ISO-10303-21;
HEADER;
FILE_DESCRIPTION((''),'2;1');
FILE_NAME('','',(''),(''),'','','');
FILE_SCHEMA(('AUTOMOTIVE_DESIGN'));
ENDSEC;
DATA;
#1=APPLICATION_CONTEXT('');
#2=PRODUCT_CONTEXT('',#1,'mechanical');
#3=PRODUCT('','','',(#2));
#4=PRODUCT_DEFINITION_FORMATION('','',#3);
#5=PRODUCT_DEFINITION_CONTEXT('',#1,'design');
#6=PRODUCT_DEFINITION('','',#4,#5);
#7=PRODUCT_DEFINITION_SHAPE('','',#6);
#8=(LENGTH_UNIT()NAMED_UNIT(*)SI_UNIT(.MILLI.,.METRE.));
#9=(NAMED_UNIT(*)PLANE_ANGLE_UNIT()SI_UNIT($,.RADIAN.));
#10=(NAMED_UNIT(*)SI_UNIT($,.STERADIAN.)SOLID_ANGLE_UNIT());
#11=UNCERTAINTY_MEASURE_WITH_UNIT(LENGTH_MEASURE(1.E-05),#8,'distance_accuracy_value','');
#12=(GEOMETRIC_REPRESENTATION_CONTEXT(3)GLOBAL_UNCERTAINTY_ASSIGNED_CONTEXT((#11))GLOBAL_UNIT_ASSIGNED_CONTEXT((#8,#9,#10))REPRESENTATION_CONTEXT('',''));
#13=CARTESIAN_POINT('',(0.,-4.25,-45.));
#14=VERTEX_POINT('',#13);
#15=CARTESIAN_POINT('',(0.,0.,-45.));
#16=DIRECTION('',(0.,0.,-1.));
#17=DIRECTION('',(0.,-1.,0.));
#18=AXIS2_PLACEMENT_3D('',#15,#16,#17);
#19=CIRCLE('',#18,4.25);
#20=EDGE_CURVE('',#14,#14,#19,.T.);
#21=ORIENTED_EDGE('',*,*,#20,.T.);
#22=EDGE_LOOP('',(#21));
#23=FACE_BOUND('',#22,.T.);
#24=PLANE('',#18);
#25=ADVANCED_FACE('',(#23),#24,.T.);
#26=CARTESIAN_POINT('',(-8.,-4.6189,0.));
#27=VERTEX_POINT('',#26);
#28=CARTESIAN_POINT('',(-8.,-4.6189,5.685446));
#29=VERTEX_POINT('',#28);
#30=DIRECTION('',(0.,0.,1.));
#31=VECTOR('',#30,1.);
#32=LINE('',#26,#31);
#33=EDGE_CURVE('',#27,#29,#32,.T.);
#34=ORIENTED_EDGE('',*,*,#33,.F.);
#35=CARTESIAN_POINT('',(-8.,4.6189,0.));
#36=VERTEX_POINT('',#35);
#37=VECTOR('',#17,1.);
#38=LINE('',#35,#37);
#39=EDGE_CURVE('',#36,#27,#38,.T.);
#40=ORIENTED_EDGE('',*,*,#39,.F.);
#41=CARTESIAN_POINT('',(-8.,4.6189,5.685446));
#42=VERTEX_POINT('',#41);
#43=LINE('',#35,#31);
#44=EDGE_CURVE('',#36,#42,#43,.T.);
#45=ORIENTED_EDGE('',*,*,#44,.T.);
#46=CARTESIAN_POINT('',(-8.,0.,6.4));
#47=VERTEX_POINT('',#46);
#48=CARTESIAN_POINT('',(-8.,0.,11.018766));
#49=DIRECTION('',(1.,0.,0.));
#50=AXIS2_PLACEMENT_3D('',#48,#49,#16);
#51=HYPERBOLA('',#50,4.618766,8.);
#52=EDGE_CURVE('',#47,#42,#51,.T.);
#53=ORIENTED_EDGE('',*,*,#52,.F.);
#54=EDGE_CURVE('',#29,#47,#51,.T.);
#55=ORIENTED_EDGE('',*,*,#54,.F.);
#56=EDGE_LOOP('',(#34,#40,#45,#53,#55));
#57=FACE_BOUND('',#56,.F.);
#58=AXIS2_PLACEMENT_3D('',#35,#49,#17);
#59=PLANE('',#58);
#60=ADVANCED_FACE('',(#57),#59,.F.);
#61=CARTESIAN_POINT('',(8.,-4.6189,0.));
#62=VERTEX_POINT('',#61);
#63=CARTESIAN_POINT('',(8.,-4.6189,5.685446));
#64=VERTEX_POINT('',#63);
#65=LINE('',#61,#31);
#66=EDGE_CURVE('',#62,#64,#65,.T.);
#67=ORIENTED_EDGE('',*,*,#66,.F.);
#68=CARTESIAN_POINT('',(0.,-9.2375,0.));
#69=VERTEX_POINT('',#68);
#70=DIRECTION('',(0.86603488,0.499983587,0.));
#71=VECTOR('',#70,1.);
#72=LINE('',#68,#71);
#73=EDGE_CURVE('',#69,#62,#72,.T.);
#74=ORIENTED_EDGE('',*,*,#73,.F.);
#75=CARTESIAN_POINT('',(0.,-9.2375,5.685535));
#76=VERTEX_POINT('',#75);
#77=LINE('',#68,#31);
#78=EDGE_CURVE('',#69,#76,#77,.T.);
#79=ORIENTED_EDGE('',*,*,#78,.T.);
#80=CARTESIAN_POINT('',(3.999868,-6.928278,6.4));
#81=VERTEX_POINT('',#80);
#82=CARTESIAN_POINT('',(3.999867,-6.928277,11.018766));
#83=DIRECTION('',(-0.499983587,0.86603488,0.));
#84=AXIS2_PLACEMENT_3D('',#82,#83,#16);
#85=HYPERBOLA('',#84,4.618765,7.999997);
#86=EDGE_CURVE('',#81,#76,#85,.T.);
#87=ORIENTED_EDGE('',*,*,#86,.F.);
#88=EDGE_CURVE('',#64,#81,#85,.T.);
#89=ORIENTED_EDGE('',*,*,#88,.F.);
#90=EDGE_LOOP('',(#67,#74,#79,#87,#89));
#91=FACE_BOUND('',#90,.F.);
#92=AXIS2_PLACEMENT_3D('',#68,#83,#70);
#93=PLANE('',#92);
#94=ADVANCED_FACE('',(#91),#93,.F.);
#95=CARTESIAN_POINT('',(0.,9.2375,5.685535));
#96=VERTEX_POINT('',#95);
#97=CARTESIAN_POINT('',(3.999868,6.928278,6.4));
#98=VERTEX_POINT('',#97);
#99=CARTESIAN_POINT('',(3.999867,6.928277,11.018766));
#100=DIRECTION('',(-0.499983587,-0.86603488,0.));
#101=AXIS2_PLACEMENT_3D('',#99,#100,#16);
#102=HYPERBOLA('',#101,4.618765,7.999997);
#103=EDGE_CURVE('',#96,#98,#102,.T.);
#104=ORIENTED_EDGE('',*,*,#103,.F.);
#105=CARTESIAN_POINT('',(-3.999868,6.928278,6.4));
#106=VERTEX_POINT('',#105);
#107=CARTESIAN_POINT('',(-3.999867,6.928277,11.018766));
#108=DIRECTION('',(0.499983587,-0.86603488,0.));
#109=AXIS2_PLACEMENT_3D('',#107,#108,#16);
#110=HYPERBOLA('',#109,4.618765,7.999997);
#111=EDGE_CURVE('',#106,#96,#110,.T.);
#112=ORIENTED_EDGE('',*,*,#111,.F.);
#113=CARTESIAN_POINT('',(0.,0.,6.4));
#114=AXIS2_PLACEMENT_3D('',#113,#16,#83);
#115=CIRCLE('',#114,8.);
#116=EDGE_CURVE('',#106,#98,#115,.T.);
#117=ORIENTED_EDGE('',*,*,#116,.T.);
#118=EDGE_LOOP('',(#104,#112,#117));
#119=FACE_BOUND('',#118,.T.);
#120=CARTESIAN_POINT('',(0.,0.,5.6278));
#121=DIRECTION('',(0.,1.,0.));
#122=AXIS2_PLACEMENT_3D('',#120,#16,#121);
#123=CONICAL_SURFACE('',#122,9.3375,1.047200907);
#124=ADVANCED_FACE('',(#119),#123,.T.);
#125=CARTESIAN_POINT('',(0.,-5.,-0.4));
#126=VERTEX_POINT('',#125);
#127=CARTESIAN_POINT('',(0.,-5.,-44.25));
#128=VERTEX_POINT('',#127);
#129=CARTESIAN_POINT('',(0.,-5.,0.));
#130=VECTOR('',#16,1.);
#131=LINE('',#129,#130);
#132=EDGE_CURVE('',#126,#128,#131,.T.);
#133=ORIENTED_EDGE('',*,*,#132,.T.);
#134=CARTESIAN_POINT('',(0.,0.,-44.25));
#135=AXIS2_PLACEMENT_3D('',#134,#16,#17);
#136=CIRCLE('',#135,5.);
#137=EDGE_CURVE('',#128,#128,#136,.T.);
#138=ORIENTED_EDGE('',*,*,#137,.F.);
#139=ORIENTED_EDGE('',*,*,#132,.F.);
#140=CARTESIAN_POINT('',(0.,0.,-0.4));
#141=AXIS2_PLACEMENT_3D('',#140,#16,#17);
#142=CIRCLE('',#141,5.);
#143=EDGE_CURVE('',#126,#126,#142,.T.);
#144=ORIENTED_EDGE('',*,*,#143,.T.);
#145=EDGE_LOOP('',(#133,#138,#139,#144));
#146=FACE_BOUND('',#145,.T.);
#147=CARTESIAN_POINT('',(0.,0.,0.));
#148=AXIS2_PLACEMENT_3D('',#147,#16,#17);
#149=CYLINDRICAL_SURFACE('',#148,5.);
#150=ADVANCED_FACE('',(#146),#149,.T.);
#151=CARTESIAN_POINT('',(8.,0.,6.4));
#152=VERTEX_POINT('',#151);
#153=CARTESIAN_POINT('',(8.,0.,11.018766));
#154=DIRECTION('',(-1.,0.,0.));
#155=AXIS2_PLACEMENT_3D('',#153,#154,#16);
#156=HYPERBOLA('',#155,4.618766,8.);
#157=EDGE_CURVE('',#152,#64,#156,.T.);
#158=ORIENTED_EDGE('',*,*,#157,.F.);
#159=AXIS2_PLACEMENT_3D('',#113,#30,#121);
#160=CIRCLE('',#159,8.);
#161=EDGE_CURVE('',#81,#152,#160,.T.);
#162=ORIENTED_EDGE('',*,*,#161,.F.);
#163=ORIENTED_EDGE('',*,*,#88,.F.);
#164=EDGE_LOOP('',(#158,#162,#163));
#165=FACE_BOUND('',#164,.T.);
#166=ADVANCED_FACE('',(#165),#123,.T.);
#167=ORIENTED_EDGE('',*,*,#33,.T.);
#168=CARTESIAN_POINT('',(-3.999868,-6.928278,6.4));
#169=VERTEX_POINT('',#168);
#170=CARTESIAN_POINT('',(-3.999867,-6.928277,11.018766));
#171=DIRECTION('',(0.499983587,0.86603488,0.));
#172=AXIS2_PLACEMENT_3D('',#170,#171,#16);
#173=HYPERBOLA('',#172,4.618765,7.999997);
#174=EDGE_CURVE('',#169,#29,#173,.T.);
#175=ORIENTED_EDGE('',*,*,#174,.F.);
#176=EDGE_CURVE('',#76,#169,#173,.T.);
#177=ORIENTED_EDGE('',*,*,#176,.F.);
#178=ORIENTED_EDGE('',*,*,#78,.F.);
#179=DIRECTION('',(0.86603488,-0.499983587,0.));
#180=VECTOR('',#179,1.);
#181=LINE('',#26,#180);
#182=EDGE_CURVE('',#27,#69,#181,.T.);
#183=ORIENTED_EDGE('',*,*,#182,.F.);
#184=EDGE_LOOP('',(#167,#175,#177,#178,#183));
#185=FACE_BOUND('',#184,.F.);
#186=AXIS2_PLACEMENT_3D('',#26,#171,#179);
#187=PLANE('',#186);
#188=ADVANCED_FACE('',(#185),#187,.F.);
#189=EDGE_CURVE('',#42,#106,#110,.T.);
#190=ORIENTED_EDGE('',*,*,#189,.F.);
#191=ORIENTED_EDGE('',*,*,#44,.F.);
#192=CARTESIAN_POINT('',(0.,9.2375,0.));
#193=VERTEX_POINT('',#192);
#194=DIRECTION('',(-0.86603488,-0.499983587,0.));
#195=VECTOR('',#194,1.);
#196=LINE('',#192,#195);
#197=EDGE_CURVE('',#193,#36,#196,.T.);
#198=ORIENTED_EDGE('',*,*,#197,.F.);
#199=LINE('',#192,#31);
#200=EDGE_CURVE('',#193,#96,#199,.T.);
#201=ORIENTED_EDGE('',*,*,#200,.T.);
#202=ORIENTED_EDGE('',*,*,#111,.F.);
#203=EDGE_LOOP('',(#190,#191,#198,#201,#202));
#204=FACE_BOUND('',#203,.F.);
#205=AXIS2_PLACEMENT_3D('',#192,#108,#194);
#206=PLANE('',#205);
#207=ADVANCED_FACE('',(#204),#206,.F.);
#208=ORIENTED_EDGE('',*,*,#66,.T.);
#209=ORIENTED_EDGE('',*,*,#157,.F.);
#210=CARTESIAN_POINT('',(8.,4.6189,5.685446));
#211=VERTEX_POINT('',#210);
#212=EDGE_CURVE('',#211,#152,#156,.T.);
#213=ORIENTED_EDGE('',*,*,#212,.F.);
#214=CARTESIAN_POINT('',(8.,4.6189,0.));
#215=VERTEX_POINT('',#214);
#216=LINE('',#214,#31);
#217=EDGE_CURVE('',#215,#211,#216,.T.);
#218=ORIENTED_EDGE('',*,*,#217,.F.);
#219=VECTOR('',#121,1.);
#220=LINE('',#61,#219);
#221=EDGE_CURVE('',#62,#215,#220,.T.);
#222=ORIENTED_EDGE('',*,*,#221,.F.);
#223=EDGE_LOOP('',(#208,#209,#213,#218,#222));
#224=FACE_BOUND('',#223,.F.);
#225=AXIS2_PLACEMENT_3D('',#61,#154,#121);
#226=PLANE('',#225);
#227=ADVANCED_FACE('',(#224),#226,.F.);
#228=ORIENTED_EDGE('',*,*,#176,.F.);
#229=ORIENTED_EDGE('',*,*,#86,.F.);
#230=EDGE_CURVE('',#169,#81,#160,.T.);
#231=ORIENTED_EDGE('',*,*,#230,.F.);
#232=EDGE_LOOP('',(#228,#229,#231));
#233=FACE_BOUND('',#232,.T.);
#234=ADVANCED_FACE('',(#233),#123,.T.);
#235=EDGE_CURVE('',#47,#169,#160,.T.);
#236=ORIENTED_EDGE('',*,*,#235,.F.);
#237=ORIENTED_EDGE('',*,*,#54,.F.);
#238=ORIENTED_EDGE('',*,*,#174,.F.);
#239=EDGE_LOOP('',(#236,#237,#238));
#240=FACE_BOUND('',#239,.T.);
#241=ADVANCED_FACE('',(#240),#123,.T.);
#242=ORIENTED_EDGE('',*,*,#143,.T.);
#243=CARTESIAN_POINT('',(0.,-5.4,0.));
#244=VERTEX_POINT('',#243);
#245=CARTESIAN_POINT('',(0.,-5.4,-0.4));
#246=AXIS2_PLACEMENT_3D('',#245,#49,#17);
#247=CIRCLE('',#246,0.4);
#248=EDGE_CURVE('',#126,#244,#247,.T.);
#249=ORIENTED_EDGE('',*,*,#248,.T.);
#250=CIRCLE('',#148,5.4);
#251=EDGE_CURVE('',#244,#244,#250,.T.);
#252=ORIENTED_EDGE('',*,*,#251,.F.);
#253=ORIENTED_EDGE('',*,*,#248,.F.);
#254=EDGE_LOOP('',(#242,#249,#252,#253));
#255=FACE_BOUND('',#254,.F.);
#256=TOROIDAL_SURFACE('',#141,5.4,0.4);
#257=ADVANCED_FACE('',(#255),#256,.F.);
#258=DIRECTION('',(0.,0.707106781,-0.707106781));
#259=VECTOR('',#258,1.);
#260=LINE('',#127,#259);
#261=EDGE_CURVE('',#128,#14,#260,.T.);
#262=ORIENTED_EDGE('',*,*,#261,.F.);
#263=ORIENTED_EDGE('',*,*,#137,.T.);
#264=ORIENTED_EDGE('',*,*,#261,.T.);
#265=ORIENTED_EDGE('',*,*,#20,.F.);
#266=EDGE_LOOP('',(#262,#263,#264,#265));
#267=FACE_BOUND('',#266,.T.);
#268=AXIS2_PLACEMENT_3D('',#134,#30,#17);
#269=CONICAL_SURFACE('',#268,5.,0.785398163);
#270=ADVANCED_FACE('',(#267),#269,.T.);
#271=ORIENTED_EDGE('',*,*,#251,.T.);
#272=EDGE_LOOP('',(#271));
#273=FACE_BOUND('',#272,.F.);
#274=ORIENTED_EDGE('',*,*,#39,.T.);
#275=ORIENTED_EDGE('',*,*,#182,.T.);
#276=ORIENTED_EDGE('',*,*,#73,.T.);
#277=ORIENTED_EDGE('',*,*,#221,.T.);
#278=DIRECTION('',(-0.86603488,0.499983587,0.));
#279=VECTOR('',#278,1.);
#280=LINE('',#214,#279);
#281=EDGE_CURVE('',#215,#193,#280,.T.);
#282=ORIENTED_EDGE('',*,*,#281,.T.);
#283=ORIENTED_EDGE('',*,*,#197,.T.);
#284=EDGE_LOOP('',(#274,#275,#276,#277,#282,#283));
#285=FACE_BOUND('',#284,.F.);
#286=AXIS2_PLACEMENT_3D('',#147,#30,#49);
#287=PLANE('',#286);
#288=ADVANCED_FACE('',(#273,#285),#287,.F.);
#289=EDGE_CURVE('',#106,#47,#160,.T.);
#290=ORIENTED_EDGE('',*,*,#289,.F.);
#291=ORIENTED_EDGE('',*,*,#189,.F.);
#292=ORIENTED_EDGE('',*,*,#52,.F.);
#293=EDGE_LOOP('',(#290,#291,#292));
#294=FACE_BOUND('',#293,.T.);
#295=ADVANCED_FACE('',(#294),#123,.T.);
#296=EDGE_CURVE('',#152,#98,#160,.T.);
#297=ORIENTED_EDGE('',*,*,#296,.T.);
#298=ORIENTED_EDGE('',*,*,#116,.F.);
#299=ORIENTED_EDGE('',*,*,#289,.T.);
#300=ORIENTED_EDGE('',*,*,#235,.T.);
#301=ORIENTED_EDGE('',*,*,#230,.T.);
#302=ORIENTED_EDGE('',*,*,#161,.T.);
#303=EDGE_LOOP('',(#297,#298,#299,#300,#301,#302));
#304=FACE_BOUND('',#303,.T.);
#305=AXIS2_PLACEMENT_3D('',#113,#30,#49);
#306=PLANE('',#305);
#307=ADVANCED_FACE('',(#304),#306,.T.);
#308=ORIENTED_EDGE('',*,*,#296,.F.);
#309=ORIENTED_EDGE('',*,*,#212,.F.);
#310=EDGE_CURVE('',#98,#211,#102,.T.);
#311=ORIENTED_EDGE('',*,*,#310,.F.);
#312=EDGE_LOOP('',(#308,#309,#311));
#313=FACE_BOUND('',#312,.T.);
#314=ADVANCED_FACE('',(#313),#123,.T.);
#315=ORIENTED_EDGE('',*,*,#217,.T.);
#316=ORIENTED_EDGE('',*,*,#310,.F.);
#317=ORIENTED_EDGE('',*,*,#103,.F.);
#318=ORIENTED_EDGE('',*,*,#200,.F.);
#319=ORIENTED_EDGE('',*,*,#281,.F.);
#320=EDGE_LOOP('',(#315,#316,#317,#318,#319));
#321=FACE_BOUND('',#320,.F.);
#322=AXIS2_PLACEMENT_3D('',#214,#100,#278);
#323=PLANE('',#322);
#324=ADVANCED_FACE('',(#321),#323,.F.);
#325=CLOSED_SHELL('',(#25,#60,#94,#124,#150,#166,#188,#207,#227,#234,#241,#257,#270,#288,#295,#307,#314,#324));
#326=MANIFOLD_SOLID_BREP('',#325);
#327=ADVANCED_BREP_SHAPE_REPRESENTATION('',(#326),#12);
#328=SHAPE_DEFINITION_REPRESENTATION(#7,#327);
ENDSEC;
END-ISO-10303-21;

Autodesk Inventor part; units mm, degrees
ref_plane "WorkPlane1" through (0, 0, 0) normal (0, 0, 1) x (1, 0, 0)
sketch "Sketch1" plane through (0, 0, 0) normal (0, 0, 1) x (1, 0, 0)
  point P0 (0, 0)
sketch "Sketch2" plane through (0, 0, 0) normal (0, 0, 1) x (1, 0, 0)
  line L0 (-8, 4.6189) -> (-8, -4.6189)
  line L1 (0, 9.2375) -> (-8, 4.6189)
  line L2 (8, 4.6189) -> (0, 9.2375)
  line L3 (8, -4.6189) -> (8, 4.6189)
  line L4 (0, -9.2375) -> (8, -4.6189)
  line L5 (-8, -4.6189) -> (0, -9.2375)
  circle A0 centre (0, 0) radius 8 construction
  dimension "d1" = 16
  dimension "d29" = 0
  dimension "d30" = 0
extrude "Extrusion1" add sketch "Sketch2" along normal blind 6.4
sketch "Sketch3" plane through (0, 0, 0) normal (1, 0, 0) x (0, 1, 0)
  line L0 (8, 6.4) -> (9.3375, 6.4)
  line L1 (9.3375, 5.6278) -> (8, 6.4)
  line L2 (9.3375, 6.4) -> (9.3375, 5.6278)
  line L3 (0, -1.28) -> (0, 7.68) projected
  line L4 (9.2375, 0) -> (9.2375, 6.4) projected
  dimension "d25" = 0.1
  dimension "d26" = 0
  dimension "d27" = 60
  dimension "d28" = 8
revolve "Revolution1" cut sketch "Sketch3" angle 360 about axis through (0, 0, -10) along (0, 0, 1)
sketch "Sketch4" plane through (0, 0, 0) normal (1, 0, 0) x (0, 1, 0)
  line L0 (0, -45) -> (0, 0)
  line L1 (-5, -45) -> (0, -45)
  line L2 (-5, 0) -> (-5, -45)
  line L3 (0, 0) -> (-5, 0)
  line L4 (0, -45) -> (0, 0)
  line L5 (-6, 0) -> (1, 0) projected
  line L6 (0, -54) -> (0, 9) projected
  dimension "d18" = 5
  dimension "d20" = 45
  dimension "d33" = 0
  dimension "d34" = 0
revolve "Revolution2" add sketch "Sketch4" angle 360 about axis through (0, 0, -45) along (0, 0, -1)
chamfer "Chamfer1" distance 0.75 angle 45 1 edges at (0, 5, -45)
fillet "Fillet1" radius 0.4 1 edges at (0, 5, 0)
thread "Thread1" size "M10x1.5" class "6g" standard "ISO Metric profile" length 26
ref_plane "MSC_PF1" through (0, 0, 0) normal (1, 0, 0) x (0, 1, 0)
ref_plane "MSC_PT1" through (0, 0, 0) normal (0, 0, -1) x (-1, 0, 0)
equation "\"d22\" = 0.5 * PTC"
equation "\"d23\" = 0.5 * PTC"
equation "\"d24\" = r"
equation "\"d1\" = ParS"
equation "\"d6\" = ParK"
equation "\"d28\" = 0.5 * ParS"
equation "\"d18\" = 0.5 * NND"
equation "\"d20\" = NLG"
equation "\"NLG\" = 45"
equation "\"PTC\" = 1.5"
equation "\"ParK\" = 6.4"
equation "\"ParS\" = 16"
equation "\"msp_es\" = 0.577367 * ParS"
equation "\"r\" = 0.4"
equation "\"NND\" = 10"
properties part number "ISO 4016 - M10 x 45" material "Steel"
